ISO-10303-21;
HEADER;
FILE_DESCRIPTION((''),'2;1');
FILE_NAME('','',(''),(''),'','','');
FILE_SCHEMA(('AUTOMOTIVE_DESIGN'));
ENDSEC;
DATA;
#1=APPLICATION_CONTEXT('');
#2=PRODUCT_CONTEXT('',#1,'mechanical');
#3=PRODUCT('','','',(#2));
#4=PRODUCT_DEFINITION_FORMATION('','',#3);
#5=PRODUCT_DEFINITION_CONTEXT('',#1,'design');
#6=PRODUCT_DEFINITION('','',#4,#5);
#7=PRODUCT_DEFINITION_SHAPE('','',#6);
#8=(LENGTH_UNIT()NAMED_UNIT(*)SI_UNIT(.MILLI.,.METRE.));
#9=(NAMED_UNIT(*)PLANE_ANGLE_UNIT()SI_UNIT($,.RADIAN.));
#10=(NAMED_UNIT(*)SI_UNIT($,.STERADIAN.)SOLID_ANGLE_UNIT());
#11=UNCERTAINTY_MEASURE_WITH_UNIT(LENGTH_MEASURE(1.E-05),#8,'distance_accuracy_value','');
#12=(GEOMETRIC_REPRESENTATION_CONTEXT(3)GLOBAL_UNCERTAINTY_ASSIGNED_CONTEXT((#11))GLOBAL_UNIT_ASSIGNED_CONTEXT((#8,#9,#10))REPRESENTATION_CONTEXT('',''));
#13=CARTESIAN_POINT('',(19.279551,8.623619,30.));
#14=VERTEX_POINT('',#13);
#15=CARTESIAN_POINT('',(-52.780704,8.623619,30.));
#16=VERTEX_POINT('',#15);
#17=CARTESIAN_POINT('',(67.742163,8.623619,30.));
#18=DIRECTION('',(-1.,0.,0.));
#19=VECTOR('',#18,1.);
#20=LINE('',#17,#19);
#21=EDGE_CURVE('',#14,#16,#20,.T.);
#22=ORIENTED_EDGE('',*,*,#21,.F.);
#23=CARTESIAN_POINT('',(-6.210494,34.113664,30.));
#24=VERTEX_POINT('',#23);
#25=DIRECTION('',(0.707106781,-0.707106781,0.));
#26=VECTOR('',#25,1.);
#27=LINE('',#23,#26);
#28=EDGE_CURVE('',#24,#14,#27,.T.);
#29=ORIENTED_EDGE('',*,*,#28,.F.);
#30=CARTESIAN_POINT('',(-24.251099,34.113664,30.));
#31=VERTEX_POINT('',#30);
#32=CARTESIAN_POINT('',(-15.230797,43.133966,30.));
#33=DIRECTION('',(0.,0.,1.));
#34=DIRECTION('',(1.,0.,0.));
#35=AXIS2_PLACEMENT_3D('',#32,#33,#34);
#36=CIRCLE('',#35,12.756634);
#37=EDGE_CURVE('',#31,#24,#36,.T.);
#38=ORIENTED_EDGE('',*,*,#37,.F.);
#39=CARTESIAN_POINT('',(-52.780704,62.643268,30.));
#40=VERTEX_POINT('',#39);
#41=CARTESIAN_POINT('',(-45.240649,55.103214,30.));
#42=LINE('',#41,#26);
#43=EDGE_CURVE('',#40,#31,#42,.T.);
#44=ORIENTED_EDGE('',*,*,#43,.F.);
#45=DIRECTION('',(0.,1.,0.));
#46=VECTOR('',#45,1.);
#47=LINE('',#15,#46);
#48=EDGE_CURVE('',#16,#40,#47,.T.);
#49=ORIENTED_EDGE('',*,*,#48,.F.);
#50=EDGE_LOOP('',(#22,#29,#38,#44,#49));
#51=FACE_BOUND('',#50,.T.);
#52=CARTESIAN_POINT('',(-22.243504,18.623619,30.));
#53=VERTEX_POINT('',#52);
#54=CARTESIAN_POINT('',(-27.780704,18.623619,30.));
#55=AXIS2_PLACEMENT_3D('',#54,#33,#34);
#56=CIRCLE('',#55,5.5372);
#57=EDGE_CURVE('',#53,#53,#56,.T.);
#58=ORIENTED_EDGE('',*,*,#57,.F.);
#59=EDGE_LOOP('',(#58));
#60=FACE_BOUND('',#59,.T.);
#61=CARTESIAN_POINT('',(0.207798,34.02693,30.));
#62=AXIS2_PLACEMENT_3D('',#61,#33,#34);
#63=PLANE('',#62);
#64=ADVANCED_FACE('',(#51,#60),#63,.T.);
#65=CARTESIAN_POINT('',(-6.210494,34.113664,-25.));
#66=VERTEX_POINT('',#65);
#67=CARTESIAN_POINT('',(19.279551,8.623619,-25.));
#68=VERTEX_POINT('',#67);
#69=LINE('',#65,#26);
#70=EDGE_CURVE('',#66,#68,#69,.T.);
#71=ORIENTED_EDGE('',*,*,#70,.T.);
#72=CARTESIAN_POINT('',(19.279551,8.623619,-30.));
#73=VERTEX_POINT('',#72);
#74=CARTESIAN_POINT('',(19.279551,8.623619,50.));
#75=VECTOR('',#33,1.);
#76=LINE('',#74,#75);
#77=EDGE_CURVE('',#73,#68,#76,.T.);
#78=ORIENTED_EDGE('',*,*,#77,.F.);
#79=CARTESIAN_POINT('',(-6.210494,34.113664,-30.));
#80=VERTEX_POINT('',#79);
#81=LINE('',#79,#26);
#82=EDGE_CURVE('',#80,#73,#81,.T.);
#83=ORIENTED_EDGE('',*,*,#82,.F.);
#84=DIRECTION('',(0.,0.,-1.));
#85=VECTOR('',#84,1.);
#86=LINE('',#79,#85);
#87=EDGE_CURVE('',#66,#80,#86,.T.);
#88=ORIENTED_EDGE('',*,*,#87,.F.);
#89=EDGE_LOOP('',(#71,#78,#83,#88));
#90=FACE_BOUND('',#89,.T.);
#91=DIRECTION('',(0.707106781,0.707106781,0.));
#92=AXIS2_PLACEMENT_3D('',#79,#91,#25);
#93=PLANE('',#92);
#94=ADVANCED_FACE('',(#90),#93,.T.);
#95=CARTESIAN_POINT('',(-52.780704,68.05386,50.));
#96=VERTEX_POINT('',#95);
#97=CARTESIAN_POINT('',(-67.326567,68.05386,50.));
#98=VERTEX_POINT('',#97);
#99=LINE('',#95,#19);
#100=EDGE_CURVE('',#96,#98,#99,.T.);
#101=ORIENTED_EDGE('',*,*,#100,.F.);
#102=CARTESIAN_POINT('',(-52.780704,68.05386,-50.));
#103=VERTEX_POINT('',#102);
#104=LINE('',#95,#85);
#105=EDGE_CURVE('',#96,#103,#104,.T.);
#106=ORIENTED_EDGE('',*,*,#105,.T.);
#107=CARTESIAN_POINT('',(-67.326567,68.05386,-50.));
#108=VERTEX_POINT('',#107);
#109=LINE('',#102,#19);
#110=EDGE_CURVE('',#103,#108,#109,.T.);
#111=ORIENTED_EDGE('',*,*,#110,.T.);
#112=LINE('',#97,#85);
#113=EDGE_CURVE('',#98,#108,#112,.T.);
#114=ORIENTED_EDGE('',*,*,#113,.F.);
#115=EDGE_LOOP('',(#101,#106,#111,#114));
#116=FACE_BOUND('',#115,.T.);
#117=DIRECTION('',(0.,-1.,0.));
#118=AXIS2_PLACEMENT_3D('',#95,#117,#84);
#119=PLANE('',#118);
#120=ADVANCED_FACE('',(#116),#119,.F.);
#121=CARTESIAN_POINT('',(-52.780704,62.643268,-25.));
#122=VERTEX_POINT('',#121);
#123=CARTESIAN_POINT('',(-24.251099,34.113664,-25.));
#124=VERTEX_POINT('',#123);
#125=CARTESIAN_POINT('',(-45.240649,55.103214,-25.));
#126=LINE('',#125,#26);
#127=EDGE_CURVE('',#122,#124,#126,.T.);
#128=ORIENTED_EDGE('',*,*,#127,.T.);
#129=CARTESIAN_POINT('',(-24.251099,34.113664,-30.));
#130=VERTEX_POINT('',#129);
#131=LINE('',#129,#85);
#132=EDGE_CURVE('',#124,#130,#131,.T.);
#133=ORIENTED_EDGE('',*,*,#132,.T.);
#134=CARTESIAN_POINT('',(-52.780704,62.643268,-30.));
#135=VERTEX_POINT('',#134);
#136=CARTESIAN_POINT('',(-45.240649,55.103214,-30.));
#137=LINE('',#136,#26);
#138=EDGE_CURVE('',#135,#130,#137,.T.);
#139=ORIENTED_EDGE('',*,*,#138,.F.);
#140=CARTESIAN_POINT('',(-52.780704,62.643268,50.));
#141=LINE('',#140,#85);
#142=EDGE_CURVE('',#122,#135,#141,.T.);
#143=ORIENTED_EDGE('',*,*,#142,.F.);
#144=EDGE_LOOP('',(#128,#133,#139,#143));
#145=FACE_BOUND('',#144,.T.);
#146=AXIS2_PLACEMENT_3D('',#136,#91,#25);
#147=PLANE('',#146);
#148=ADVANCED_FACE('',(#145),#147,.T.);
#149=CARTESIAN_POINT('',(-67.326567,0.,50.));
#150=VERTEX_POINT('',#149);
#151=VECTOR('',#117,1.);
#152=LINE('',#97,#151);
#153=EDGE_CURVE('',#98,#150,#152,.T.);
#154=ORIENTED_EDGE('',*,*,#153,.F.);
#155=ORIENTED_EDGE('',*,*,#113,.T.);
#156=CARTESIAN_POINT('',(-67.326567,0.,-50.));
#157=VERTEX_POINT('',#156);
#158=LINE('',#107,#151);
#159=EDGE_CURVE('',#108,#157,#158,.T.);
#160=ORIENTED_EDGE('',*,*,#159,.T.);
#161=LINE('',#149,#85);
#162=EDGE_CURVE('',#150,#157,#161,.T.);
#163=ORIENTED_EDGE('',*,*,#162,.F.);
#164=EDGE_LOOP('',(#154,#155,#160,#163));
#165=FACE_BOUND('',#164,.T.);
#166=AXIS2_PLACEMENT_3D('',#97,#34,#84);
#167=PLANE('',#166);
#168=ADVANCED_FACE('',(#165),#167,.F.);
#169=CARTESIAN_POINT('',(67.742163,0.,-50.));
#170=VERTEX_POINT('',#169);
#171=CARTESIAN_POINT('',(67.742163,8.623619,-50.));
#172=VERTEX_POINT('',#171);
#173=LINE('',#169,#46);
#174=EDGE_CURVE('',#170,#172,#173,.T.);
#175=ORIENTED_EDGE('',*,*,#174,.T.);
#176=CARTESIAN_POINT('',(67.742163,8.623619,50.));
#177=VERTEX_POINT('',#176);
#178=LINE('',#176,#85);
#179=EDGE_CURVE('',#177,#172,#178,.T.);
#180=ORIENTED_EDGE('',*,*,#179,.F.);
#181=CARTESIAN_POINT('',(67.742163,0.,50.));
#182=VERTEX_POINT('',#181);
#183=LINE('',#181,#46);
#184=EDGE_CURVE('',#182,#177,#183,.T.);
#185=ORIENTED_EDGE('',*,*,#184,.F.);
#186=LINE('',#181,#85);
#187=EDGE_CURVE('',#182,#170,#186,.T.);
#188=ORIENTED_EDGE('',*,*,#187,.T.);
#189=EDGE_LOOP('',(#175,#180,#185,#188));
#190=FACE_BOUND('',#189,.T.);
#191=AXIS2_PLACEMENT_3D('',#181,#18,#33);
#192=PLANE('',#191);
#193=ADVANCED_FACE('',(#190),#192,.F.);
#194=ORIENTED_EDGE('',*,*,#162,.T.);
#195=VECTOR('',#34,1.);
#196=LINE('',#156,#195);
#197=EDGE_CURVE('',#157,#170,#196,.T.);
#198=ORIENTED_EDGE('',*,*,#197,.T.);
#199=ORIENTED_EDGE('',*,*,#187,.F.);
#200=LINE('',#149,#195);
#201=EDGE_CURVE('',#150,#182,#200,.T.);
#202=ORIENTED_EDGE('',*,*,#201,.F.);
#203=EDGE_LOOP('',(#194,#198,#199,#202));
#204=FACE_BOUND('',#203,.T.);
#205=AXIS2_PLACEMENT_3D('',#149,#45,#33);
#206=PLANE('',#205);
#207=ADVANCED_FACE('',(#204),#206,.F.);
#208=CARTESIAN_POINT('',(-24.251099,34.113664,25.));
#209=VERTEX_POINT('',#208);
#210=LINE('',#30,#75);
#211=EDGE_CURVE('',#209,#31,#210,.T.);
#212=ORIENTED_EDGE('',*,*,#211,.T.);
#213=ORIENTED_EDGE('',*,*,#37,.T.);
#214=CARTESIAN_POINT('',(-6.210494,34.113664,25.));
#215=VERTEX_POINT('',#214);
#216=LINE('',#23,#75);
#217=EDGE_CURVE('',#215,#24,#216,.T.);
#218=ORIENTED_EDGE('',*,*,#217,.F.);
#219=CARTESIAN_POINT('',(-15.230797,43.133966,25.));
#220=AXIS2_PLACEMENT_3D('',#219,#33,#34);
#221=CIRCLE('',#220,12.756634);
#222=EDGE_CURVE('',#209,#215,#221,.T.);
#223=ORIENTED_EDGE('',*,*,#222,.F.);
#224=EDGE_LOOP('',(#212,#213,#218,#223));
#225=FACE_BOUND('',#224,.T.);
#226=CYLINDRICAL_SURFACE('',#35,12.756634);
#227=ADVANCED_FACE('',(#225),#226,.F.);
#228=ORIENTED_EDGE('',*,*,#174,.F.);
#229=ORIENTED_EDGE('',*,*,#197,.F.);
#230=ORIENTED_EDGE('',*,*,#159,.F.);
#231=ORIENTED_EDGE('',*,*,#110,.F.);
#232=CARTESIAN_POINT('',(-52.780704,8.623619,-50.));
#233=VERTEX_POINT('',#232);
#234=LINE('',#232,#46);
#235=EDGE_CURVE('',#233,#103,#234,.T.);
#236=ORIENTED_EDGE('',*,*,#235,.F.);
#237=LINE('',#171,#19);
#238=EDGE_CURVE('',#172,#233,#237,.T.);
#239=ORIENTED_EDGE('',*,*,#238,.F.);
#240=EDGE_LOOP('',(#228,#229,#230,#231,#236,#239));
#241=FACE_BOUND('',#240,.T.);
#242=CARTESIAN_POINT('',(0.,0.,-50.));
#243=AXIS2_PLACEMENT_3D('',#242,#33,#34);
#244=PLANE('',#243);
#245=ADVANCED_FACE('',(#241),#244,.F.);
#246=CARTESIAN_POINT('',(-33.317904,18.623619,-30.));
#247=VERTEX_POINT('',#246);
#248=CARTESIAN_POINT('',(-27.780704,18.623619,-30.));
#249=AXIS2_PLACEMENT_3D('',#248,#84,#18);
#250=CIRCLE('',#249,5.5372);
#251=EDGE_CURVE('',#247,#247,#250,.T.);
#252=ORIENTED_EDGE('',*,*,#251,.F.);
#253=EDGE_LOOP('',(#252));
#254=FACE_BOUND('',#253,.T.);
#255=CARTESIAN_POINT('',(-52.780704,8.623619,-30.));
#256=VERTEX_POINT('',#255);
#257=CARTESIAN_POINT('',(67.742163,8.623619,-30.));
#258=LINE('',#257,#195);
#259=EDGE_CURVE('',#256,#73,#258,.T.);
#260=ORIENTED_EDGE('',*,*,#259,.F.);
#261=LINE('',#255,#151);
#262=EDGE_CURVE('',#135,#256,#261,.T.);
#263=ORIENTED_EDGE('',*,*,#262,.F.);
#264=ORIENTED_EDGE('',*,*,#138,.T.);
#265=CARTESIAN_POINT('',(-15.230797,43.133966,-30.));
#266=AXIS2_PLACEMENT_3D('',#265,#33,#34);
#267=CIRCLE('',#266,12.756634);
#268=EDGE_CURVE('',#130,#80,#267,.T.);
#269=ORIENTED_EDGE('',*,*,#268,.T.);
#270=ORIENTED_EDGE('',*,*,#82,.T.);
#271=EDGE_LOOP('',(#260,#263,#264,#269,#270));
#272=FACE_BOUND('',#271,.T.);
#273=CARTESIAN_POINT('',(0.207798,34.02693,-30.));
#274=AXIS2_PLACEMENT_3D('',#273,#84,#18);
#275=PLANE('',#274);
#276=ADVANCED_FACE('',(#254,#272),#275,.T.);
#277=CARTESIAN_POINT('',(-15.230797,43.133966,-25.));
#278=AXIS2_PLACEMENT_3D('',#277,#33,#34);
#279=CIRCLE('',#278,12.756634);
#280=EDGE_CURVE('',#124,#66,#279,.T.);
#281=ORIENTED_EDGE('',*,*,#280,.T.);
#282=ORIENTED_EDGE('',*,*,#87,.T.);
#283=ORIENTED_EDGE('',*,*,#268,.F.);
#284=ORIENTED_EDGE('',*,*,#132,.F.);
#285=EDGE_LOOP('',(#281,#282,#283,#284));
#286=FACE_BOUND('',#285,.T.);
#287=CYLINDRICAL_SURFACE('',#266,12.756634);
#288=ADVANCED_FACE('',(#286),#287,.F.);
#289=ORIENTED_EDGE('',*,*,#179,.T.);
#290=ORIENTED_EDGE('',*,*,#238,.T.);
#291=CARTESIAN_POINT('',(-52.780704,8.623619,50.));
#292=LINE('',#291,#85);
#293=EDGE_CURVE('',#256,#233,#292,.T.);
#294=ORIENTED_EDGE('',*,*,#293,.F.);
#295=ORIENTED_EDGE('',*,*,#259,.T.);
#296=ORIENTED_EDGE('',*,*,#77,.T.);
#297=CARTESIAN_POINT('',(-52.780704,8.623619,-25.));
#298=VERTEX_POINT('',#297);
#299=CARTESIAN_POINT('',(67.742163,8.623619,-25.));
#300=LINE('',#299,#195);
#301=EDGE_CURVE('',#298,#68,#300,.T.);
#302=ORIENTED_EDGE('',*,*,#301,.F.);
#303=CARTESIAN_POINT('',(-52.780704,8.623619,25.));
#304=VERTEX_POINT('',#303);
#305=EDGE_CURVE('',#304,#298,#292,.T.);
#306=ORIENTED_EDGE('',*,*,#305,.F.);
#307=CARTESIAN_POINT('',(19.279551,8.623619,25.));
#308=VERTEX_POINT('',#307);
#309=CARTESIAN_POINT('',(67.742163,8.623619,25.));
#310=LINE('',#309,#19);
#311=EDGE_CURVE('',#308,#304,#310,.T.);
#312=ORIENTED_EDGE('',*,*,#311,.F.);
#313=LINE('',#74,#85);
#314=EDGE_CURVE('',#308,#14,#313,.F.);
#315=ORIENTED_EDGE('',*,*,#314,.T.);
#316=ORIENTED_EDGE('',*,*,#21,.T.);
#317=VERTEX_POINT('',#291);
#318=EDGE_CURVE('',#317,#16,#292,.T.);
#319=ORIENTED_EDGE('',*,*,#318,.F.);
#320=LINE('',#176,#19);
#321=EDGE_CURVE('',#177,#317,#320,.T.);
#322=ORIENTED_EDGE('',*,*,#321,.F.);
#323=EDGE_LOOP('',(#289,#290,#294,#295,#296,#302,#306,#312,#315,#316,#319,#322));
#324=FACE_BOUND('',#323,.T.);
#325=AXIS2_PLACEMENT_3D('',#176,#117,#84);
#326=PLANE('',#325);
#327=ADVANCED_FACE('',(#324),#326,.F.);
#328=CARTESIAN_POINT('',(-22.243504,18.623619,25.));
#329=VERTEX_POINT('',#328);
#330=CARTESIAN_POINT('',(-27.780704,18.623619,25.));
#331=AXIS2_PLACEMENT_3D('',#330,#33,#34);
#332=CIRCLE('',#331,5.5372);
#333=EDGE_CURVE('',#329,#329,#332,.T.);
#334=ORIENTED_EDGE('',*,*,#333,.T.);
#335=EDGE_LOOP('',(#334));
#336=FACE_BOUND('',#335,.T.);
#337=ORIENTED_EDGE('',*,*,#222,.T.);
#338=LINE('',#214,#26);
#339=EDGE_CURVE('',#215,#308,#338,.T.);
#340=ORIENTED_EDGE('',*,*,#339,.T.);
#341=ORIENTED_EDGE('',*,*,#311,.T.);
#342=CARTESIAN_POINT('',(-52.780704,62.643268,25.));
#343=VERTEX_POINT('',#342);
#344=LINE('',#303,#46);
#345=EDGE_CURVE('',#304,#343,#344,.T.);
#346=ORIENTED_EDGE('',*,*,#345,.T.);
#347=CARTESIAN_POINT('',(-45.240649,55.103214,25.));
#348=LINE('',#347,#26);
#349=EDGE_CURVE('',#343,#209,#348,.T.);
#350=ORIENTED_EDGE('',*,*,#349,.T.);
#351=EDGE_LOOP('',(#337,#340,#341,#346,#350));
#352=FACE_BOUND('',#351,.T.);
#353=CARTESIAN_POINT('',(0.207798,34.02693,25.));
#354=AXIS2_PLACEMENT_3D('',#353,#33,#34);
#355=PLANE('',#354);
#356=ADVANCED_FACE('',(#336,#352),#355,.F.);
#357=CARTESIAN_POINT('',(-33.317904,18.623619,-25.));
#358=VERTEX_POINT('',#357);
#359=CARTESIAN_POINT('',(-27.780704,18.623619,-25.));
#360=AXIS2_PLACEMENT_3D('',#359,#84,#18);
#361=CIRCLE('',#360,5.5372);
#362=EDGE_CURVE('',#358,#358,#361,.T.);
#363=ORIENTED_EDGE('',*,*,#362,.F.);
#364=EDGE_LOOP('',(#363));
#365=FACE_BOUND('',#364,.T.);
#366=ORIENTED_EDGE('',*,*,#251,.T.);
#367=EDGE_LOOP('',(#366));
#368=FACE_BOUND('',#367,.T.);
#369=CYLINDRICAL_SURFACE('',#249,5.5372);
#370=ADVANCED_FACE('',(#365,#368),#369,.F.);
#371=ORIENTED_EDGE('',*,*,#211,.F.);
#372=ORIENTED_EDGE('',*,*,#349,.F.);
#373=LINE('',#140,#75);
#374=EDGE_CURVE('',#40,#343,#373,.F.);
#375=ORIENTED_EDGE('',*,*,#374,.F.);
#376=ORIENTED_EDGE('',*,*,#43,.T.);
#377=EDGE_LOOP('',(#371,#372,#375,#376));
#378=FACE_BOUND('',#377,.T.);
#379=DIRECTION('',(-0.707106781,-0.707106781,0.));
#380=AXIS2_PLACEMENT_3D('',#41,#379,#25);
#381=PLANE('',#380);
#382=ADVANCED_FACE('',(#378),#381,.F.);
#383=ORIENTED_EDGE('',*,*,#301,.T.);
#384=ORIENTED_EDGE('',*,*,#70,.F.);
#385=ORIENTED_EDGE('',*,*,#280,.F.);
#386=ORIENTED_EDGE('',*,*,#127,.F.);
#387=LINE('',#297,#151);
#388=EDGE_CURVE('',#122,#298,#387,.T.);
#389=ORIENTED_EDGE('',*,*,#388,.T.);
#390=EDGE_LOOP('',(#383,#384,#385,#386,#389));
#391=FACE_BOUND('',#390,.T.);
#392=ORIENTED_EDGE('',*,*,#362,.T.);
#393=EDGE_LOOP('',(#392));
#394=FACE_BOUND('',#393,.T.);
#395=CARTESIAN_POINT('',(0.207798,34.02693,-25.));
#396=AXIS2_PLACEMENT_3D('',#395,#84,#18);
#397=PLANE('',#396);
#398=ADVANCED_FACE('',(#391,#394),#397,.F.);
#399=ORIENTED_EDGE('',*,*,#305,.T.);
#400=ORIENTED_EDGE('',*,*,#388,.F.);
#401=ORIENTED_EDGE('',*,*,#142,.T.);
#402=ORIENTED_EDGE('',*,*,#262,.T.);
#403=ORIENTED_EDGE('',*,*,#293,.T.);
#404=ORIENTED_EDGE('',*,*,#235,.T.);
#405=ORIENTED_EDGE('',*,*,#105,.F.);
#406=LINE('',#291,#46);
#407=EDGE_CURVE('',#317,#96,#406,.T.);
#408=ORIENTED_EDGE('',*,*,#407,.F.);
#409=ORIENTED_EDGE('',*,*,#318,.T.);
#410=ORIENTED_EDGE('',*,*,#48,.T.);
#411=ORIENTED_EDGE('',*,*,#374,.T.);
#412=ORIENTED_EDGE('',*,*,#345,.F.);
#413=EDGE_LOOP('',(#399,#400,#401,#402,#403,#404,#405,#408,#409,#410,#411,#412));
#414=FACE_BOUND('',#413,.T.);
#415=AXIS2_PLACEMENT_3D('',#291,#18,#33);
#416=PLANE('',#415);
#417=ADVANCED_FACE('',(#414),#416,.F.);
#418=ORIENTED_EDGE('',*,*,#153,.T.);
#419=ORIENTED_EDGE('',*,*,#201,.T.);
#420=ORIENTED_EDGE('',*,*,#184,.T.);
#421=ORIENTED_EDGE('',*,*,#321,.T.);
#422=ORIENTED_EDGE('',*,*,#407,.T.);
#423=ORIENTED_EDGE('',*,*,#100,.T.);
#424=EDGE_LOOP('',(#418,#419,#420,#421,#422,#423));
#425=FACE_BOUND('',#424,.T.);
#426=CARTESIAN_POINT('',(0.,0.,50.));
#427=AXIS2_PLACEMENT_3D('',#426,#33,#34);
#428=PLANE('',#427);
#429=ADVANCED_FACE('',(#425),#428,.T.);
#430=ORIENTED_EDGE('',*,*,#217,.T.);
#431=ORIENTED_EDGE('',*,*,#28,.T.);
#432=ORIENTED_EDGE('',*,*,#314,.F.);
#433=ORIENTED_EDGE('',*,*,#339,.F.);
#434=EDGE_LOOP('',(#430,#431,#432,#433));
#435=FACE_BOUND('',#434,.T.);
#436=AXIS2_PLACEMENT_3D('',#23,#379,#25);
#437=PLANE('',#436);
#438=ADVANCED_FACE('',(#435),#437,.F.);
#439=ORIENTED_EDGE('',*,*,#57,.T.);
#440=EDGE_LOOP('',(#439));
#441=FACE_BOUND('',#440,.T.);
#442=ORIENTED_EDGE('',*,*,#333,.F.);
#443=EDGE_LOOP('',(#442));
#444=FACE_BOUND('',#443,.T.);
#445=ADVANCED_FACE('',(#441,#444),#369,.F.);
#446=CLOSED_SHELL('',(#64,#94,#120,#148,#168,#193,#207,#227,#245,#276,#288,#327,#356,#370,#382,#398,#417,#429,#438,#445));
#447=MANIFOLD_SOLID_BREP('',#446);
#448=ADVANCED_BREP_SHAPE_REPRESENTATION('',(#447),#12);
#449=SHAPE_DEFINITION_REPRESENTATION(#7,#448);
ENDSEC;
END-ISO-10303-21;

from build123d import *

# Parameters (mm, degrees)
BOSS_EXTRU_1_DEPTH = 50
NERVURE1_START     = -5
NERVURE1_DEPTH     = 5
D_GAGEMENT_51_D    = 11.0744


# Read off the part's stored shape, not the designer's step: Nervure1
with BuildPart() as part:
    # Esquisse1 → Boss.-Extru.1 (new, symmetric)
    with BuildSketch(Plane.XY):
        Polygon((-67.326566733, 0), (67.742162824, 0), (67.742162824, 8.623618887), (-52.78070355, 8.623618887), (-52.78070355, 68.053859892), (-67.326566733, 68.053859892), align=None)
    extrude(amount=BOSS_EXTRU_1_DEPTH, both=True)

    # Nervure1 outline → Nervure1 (add)
    with BuildSketch(Plane.XY.offset(30).offset(NERVURE1_START)):
        with BuildLine():
            Line((19.279550654, 8.623618887), (-6.210494082, 34.113663623))
            ThreePointArc((-6.210494082, 34.113663623), (-15.230796531, 30.377332012), (-24.251098981, 34.113663623))
            Line((-24.251098981, 34.113663623), (-52.78070355, 62.643268192))
            Line((-52.78070355, 62.643268192), (-52.78070355, 8.623618887))
            Line((-52.78070355, 8.623618887), (19.279550654, 8.623618887))
        make_face()
    nervure1 = extrude(amount=NERVURE1_DEPTH)

    # Symétrie1: Nervure1 across plane
    add(nervure1.mirror(Plane.XY))

    # Dégagement #51 (through all)
    with Locations(Plane(origin=(0, 0, -30), x_dir=(-1, 0, 0), z_dir=(0, 0, -1))):
        with Locations((27.78070355, 18.623618887)):
            Hole(D_GAGEMENT_51_D / 2)


solid = part.part
